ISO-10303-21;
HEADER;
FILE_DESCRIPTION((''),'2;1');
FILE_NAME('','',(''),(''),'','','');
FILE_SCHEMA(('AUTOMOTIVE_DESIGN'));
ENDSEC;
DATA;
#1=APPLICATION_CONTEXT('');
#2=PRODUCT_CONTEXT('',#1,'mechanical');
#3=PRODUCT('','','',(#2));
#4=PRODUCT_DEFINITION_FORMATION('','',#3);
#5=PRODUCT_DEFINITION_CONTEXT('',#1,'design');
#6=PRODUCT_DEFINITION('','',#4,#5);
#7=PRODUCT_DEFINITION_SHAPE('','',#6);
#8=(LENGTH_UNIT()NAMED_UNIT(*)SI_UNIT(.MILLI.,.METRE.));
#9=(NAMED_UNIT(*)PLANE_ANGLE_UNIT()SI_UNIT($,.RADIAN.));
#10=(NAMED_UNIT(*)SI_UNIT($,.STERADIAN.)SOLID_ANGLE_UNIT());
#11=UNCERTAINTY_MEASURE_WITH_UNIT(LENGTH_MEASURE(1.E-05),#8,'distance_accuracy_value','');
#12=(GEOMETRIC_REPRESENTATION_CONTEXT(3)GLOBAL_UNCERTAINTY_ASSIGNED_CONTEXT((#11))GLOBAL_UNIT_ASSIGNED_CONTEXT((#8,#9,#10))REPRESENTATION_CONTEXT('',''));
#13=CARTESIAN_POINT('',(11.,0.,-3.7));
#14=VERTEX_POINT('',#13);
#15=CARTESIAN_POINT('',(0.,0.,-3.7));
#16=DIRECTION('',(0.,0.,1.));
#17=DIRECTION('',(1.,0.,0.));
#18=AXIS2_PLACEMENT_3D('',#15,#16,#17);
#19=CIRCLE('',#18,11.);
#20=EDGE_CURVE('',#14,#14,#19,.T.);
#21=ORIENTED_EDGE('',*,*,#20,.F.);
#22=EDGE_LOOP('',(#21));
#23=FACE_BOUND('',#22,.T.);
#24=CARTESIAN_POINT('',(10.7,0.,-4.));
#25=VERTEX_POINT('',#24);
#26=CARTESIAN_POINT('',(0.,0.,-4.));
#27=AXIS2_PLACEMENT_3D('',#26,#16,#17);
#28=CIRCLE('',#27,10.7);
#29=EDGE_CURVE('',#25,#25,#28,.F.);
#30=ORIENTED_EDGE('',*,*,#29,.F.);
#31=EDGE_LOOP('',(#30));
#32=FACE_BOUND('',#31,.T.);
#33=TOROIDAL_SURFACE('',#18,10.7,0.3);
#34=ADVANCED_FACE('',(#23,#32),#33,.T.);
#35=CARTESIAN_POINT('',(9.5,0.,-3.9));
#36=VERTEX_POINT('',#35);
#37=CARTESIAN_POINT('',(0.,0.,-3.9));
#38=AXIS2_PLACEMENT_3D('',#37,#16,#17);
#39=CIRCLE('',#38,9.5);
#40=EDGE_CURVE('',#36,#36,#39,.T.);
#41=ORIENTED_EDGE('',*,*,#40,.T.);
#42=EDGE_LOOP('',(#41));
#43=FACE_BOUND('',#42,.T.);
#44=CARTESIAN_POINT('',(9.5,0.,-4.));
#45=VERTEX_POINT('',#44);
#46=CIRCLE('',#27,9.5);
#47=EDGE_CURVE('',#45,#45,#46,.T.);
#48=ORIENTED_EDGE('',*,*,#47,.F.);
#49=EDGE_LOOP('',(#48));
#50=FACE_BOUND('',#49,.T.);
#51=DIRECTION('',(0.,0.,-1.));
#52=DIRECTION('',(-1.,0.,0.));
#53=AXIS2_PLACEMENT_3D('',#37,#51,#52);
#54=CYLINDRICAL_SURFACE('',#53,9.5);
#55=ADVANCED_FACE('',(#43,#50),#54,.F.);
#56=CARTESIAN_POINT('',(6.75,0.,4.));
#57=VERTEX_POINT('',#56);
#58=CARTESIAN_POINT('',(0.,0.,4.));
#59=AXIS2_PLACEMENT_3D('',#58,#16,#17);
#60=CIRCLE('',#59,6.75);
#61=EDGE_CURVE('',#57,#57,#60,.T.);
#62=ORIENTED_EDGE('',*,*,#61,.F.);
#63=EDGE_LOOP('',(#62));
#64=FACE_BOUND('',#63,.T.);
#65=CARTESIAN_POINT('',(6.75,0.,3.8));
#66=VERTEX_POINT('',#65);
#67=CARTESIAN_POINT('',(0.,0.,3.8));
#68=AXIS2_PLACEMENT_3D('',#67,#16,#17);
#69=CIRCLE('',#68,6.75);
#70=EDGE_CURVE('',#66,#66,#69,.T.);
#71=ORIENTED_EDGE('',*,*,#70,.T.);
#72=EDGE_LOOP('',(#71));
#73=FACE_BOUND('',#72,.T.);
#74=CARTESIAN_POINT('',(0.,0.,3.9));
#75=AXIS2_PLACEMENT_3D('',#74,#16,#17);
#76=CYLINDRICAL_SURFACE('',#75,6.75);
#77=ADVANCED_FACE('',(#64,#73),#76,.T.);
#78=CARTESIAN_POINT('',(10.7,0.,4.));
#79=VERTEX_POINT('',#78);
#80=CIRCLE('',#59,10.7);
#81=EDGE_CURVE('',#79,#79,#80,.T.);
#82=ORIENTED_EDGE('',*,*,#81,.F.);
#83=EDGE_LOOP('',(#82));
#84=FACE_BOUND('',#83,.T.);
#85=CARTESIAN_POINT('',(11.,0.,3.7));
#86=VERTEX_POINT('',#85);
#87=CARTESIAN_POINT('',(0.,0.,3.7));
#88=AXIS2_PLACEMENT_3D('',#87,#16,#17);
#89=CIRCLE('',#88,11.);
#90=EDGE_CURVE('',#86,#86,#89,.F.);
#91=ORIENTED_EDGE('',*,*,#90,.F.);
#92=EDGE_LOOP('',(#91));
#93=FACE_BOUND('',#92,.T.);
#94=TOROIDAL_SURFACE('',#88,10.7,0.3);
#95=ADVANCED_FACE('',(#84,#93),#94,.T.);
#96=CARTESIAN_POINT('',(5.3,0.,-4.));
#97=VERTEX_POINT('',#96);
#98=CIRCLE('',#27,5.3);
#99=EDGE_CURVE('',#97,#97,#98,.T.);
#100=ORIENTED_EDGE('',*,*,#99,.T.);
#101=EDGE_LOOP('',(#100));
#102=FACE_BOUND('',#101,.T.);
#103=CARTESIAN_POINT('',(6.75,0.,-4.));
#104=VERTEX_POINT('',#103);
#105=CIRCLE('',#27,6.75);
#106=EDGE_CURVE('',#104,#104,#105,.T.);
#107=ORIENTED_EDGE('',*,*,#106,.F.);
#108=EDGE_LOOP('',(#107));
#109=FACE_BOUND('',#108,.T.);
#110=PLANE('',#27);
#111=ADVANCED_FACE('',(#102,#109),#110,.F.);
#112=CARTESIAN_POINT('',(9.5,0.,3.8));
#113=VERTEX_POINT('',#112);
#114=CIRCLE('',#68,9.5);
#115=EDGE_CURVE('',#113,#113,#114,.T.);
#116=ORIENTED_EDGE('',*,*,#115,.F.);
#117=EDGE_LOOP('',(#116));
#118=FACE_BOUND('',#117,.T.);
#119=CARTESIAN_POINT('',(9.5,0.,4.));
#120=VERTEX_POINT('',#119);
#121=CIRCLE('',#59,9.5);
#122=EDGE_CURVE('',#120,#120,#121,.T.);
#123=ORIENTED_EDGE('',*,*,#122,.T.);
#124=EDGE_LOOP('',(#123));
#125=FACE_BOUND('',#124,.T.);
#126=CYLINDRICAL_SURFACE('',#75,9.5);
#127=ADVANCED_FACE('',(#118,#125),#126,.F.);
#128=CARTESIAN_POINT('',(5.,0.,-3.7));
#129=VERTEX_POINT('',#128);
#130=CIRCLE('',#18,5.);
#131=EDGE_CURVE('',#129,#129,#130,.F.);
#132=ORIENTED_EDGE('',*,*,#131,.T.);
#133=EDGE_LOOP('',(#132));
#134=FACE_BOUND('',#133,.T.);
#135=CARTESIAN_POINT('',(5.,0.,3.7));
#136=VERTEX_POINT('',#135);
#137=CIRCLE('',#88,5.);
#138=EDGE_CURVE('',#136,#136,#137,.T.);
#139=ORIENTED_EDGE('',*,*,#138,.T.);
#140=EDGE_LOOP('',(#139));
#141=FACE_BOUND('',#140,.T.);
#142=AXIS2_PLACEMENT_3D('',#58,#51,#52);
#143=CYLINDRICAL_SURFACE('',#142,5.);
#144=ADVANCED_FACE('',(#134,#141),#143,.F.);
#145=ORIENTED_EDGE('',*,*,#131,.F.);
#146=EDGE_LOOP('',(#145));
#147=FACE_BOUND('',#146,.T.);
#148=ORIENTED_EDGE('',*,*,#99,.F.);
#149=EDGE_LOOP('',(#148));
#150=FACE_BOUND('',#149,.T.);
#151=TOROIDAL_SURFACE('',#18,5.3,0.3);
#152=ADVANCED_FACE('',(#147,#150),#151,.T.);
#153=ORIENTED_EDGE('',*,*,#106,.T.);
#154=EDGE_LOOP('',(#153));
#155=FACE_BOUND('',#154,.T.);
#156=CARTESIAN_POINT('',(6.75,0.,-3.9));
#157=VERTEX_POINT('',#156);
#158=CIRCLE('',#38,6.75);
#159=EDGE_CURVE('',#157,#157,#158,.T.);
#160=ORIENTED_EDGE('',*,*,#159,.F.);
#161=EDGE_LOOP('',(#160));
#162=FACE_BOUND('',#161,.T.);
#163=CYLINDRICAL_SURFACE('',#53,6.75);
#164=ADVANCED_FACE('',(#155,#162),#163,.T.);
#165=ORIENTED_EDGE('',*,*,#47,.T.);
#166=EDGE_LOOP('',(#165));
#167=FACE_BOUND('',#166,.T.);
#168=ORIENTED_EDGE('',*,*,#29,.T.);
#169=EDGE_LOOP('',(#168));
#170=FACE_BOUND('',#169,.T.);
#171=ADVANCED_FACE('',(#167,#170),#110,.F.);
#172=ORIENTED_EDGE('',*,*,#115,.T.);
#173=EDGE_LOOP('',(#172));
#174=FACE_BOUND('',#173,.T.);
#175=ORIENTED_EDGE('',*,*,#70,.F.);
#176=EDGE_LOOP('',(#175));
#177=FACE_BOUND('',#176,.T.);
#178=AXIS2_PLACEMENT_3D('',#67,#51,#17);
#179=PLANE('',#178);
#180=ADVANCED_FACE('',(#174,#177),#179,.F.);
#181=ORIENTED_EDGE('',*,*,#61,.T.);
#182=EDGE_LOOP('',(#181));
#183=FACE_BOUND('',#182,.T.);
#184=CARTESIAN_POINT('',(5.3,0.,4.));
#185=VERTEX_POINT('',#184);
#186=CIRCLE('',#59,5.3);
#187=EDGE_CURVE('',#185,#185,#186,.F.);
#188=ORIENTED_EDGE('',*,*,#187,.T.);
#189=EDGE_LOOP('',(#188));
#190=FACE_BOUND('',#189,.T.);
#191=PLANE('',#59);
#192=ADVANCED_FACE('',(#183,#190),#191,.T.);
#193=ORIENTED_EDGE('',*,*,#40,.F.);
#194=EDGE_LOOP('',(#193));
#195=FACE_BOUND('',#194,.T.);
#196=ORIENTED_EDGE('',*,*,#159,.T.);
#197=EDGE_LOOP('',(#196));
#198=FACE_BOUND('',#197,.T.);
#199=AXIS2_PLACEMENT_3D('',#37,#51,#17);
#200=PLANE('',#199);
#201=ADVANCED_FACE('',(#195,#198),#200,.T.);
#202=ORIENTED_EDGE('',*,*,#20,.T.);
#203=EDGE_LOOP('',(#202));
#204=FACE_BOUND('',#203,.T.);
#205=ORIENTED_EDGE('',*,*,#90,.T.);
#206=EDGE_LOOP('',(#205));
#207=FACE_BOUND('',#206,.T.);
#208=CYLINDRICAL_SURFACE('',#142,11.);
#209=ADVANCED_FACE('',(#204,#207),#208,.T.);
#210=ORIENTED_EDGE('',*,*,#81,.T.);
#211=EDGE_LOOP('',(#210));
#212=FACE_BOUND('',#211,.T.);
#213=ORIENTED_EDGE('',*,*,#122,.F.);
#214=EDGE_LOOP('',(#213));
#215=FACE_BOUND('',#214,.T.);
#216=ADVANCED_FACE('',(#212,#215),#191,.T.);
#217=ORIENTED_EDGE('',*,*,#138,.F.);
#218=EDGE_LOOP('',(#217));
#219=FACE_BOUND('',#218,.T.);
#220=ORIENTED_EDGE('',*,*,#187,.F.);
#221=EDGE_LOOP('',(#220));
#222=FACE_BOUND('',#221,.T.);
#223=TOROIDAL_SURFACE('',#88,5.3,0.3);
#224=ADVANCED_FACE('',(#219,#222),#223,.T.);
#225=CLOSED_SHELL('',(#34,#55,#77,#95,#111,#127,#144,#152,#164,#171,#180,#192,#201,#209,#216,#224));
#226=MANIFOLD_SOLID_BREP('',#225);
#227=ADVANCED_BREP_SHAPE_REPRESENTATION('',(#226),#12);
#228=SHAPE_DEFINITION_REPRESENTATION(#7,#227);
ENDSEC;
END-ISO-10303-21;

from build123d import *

# Parameters (mm, degrees)
SKETCH1_R             = 11
SKETCH1_R_2           = 5
BOSS_EXTRUDE1_DEPTH   = 4
SKETCH2_R             = 9.5
SKETCH2_R_2           = 6.75
CUT_EXTRUDE1_DEPTH    = 0.1
MIRROR1_START         = -4
MIRROR1_OUTLINE_R     = 9.5
MIRROR1_OUTLINE_R_2   = 6.75
MIRROR1_DEPTH         = 0.1
MIRROR1_START_2       = 3.8
MIRROR1_2_OUTLINE_R   = 9.5
MIRROR1_2_OUTLINE_R_2 = 6.75
MIRROR1_2_DEPTH       = 0.1
FILLET1_R             = 0.3


# Read off the part's stored shape, not the designer's step: Mirror1
with BuildPart() as part:
    # Sketch1 → Boss-Extrude1 (new, symmetric)
    with BuildSketch(Plane.XY):
        Circle(SKETCH1_R)
        Circle(SKETCH1_R_2, mode=Mode.SUBTRACT)
    extrude(amount=BOSS_EXTRUDE1_DEPTH, both=True)

    # Sketch2 → Cut-Extrude1 (cut)
    with BuildSketch(Plane.XY.offset(4)):
        Circle(SKETCH2_R)
        Circle(SKETCH2_R_2, mode=Mode.SUBTRACT)
    extrude(amount=-CUT_EXTRUDE1_DEPTH, mode=Mode.SUBTRACT)

    # Mirror1 outline → Mirror1 (cut)
    with BuildSketch(Plane.XY.offset(MIRROR1_START)):
        Circle(MIRROR1_OUTLINE_R)
        Circle(MIRROR1_OUTLINE_R_2, mode=Mode.SUBTRACT)
    extrude(amount=MIRROR1_DEPTH, mode=Mode.SUBTRACT)

    # Mirror1 2 outline → Mirror1 2 (cut)
    with BuildSketch(Plane.XY.offset(MIRROR1_START_2)):
        Circle(MIRROR1_2_OUTLINE_R)
        Circle(MIRROR1_2_OUTLINE_R_2, mode=Mode.SUBTRACT)
    extrude(amount=MIRROR1_2_DEPTH, mode=Mode.SUBTRACT)

    # Fillet1
    fillet1_edges = [part.edges().sort_by_distance(p)[0] for p in [
        (-11, 0, -4),
        (-11, 0, 4),
        (-5, 0, -4),
        (-5, 0, 4),
    ]]
    fillet(fillet1_edges, radius=FILLET1_R)


solid = part.part
